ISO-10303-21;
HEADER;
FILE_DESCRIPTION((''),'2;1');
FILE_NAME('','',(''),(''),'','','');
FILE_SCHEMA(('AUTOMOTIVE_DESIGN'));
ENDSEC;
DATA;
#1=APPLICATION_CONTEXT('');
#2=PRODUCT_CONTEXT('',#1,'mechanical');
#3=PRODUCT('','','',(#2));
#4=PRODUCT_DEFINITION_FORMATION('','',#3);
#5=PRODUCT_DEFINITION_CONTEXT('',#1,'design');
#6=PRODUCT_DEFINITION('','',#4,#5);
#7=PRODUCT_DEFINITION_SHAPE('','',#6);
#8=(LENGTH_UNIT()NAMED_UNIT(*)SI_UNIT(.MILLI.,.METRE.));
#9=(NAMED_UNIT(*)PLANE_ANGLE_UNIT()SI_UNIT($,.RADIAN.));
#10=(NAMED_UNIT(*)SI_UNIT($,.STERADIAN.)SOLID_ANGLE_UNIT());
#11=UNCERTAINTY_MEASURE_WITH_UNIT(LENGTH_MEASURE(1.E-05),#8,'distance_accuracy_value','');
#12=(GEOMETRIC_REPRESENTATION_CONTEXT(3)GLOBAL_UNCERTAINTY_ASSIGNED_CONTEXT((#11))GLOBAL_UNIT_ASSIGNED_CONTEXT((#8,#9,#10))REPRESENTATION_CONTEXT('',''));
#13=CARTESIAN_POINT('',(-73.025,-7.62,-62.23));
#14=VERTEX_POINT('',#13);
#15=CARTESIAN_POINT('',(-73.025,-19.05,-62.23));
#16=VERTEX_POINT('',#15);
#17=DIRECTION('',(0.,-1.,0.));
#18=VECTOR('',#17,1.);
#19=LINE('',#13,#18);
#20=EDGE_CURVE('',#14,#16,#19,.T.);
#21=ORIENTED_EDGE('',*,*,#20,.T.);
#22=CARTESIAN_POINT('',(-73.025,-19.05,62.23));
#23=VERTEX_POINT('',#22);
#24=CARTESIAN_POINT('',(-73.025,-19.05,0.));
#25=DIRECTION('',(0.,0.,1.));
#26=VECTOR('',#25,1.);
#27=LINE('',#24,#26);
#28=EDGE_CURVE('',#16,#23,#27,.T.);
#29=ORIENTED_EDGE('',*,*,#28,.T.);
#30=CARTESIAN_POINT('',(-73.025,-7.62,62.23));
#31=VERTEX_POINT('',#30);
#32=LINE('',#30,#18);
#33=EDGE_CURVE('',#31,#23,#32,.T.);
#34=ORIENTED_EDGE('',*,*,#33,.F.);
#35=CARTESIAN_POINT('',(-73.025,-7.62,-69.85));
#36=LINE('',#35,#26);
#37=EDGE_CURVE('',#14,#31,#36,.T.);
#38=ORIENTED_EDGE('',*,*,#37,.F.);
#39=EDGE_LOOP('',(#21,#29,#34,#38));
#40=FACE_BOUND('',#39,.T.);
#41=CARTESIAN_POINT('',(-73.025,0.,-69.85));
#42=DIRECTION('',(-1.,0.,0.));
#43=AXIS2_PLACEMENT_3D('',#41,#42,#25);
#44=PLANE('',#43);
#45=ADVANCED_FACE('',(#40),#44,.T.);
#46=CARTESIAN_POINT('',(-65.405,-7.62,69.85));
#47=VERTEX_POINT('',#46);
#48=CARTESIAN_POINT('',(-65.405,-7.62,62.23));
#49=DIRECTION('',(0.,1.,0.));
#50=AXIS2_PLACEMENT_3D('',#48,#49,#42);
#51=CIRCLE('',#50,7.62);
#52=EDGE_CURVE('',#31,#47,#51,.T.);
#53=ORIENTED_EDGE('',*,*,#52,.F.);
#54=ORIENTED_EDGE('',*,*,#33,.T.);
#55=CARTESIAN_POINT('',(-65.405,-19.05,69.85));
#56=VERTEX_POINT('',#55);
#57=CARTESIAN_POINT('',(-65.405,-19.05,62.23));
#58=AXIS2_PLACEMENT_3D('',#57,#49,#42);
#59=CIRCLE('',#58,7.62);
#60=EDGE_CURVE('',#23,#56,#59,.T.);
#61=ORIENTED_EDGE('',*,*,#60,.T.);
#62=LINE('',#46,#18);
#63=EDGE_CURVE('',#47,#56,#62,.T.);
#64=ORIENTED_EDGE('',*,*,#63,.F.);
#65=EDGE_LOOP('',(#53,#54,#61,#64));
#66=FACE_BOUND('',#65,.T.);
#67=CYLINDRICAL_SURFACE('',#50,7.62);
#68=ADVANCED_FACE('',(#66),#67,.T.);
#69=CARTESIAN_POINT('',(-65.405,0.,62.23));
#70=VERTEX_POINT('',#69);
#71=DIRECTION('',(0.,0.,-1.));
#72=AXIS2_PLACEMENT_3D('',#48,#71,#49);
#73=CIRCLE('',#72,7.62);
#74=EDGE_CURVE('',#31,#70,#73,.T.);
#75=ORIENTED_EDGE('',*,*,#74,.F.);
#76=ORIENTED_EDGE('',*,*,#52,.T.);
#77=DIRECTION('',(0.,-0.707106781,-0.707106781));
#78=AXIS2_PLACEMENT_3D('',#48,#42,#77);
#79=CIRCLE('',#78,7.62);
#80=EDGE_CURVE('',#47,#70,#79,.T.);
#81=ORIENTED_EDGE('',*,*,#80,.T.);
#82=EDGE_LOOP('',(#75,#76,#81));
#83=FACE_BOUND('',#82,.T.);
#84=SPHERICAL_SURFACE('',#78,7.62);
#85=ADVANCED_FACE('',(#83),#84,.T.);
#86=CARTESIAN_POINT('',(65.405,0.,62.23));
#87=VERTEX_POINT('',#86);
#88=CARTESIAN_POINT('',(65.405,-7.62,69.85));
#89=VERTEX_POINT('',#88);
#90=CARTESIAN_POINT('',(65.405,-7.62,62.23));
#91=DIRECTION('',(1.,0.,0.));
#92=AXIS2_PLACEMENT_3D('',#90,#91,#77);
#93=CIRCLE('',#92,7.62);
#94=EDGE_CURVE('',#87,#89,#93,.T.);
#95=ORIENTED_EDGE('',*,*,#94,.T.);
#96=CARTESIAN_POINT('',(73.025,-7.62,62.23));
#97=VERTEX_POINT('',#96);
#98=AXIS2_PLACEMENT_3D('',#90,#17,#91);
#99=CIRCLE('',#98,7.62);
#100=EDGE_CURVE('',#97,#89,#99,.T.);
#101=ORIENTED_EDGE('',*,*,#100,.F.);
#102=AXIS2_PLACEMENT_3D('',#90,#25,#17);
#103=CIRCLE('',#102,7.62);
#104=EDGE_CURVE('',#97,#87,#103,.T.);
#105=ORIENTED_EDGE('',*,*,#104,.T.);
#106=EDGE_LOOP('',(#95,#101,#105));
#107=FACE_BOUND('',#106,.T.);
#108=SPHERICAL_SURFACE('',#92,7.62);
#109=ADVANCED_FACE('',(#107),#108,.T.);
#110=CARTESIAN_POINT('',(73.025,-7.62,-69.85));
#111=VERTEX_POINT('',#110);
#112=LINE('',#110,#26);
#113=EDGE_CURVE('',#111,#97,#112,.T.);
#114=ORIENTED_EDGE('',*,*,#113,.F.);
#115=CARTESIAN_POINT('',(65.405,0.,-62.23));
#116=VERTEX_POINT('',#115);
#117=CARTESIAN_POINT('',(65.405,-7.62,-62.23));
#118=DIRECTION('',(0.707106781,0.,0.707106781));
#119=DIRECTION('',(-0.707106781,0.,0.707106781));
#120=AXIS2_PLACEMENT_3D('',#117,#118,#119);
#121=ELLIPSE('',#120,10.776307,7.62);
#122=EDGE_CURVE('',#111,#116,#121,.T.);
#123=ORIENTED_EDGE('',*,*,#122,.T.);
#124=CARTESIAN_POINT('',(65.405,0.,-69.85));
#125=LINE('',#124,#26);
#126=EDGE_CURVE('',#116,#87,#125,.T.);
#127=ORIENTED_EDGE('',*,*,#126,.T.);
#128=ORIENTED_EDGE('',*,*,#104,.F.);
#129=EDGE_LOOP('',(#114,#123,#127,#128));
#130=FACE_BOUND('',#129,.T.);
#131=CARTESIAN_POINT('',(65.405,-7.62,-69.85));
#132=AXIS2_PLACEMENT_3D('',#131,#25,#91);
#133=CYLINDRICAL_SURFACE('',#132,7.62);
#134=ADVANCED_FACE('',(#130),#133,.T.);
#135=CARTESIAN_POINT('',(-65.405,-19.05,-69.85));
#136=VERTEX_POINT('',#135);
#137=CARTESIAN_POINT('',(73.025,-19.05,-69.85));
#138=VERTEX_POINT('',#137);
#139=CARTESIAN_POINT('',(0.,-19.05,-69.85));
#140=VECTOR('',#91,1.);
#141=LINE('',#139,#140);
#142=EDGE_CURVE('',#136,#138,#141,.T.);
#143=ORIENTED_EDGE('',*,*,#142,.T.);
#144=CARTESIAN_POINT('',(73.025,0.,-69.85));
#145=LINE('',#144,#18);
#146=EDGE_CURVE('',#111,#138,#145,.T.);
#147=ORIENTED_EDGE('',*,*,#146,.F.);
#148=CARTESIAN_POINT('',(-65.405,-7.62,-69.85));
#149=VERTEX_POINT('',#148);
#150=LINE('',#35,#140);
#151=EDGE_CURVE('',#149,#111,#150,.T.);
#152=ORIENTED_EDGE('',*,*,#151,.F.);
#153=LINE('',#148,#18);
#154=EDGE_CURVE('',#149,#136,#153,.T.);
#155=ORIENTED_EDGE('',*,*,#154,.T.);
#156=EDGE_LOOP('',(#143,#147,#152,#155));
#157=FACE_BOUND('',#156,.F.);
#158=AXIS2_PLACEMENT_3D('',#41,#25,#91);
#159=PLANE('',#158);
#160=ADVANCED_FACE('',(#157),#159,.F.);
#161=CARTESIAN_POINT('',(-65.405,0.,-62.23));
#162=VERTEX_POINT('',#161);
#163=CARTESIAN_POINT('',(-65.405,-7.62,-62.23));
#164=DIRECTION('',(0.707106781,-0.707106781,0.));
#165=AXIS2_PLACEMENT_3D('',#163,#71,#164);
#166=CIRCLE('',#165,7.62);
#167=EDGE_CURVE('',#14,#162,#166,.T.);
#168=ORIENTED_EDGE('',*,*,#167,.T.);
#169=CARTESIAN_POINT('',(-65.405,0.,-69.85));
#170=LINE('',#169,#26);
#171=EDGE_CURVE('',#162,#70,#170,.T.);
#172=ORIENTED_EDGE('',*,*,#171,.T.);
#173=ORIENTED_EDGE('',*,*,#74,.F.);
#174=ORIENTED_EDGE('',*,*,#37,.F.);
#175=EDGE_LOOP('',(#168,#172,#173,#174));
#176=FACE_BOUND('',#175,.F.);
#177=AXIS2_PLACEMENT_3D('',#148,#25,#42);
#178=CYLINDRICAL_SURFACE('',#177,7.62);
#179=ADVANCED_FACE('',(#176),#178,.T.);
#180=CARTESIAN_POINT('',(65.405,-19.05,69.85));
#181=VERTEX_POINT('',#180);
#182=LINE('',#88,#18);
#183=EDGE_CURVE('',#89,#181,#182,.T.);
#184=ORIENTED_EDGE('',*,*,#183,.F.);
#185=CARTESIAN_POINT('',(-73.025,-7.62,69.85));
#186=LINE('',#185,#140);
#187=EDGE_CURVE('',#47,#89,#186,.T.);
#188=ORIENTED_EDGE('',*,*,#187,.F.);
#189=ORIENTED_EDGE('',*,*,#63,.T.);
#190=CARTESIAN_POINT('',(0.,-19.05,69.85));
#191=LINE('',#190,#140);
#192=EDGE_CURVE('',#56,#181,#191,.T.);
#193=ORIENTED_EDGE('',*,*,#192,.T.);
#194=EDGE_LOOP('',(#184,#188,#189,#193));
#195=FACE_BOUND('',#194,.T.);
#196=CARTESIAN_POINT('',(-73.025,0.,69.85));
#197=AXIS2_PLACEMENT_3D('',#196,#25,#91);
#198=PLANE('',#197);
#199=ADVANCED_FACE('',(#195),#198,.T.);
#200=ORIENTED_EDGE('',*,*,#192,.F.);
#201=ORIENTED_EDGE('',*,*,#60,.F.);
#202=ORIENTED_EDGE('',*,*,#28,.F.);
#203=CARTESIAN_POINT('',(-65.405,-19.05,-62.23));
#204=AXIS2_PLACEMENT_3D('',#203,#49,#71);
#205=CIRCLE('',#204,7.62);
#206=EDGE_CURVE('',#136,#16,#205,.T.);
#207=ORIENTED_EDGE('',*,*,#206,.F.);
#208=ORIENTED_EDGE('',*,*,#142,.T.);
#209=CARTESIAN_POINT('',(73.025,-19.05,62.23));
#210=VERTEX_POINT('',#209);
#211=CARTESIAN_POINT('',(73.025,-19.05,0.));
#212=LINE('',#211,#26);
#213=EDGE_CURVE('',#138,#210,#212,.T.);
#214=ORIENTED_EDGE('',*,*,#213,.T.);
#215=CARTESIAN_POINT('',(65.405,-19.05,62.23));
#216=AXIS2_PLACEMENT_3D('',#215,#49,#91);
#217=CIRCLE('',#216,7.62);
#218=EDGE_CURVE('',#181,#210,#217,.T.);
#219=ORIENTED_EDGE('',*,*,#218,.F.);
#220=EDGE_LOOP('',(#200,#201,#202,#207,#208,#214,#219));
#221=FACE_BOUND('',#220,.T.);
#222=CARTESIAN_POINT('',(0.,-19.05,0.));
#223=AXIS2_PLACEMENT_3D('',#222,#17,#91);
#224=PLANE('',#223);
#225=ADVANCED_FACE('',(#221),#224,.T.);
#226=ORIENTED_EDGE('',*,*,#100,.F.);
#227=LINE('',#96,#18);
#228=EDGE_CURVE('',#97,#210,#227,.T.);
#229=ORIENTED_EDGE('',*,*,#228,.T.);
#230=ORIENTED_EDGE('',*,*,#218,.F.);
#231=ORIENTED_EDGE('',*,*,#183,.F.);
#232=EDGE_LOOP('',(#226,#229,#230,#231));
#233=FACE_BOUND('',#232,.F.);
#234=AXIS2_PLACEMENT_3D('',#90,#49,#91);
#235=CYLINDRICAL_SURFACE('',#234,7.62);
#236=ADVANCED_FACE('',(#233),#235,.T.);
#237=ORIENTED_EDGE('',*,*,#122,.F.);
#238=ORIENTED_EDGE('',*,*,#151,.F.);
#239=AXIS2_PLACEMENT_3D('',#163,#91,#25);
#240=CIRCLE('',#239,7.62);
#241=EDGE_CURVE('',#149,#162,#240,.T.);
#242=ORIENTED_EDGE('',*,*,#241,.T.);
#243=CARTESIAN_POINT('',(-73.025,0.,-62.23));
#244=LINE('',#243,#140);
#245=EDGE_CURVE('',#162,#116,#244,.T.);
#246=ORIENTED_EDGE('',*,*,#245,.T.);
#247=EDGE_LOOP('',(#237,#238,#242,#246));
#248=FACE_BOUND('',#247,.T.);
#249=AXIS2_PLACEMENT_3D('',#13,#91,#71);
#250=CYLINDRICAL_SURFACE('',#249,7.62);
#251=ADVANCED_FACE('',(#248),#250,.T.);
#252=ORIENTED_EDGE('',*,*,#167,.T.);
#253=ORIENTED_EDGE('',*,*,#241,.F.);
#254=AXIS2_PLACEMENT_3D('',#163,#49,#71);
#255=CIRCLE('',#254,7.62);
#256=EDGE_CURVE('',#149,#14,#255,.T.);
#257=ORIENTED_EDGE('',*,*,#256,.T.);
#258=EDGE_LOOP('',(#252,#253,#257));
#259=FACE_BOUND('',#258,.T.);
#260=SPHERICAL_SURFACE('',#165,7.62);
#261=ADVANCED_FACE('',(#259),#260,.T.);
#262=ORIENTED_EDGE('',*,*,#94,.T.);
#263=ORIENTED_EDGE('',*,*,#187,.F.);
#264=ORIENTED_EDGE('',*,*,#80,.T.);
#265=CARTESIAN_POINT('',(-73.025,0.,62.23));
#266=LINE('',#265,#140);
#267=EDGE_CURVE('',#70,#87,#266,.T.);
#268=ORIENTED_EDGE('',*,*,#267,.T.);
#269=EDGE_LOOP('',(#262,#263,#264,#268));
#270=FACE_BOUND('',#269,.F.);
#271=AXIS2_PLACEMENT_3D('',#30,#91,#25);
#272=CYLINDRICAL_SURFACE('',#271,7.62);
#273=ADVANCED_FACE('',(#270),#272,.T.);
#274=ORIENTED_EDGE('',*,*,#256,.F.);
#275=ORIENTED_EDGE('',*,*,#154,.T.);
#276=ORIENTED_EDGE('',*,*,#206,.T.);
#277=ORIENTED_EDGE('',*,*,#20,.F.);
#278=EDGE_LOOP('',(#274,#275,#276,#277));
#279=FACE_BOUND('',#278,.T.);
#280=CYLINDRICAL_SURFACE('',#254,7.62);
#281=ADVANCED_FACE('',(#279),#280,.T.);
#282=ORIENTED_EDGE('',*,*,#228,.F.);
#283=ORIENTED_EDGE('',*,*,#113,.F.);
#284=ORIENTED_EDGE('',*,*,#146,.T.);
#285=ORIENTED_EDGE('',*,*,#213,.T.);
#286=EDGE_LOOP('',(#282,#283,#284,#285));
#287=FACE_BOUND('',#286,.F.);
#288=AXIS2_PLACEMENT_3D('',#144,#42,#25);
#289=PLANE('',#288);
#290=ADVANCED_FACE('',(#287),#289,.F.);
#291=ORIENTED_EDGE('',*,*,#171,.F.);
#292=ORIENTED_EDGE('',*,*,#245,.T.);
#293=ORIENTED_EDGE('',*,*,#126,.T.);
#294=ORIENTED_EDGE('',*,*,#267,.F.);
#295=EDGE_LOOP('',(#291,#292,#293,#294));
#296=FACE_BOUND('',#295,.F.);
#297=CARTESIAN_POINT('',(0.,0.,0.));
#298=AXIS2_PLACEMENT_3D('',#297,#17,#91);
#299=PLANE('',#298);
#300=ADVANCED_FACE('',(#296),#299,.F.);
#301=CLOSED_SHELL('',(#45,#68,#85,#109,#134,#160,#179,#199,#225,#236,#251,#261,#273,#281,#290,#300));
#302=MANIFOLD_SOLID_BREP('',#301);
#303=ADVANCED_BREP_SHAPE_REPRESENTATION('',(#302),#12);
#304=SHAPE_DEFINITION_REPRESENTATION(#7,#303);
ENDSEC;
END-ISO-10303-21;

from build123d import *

# Parameters (mm, degrees)
F0_W         = 146.05
F0_H         = 139.7
F1_DEPTH     = 19.05
F2_R         = 7.62
F3_T1_DEPTH  = 30.48
F3_S5_W      = 7.62
F3_S5_H      = 7.62
F3_T6_DEPTH  = 7.62
F3_S11_W     = 7.62
F3_S11_H     = 7.62
F3_T12_DEPTH = 7.62
F4_T1_DEPTH  = 30.48
F4_S5_W      = 7.62
F4_S5_H      = 7.62
F4_T6_DEPTH  = 7.62


# Not quite as in the source:
# - a fillet or chamfer that OpenCascade refuses, or shapes differently, is made with other operations: its cross-section is extruded or revolved along the edge and cut away or added


with BuildPart() as f1:
    # F0 (on Front) → F1 (new body)
    with BuildSketch(Plane.XZ):
        Rectangle(F0_W, F0_H)
    extrude(amount=F1_DEPTH)

    # F2
    f2_edges = [f1.edges().sort_by_distance(p)[0] for p in [
        (73.025, 0, 0),
        (0, 0, 69.85),
        (-73.025, 0, 0),
        (0, 0, -69.85),
    ]]
    fillet(f2_edges, radius=F2_R)

    # F3: fillet of radius 7.62 on 2 edges, made by hand

    # F3_s2 → F3_t1 (cut)
    with BuildSketch(Plane.XZ.offset(7.62)):
        with BuildLine():
            ThreePointArc((-73.025, 62.23), (-70.7931536726, 67.6181536726), (-65.405, 69.85))
            Line((-65.405, 69.85), (-73.025, 69.85))
            Line((-73.025, 69.85), (-73.025, 62.23))
        make_face()
        with BuildLine():
            ThreePointArc((73.025, 62.23), (70.7931536726, 67.6181536726), (65.405, 69.85))
            Line((65.405, 69.85), (73.025, 69.85))
            Line((73.025, 69.85), (73.025, 62.23))
        make_face()
    extrude(amount=F3_T1_DEPTH, mode=Mode.SUBTRACT)


with BuildPart() as f3_tool4:
    # F3_s5 → F3_t6 (new body)
    with BuildSketch(Plane.YZ.offset(65.405)):
        with Locations((-3.81, 66.04)):
            Rectangle(F3_S5_W, F3_S5_H)
    extrude(amount=F3_T6_DEPTH)

    # F3_s7 → F3_t8 (revolve, cut)
    with BuildSketch(Plane(origin=(65.405, -7.62, 62.23), x_dir=(0, -0.7071067812, -0.7071067812), z_dir=(0, -0.7071067812, 0.7071067812))):
        with BuildLine():
            ThreePointArc((0, -7.62), (7.62, 0), (0, 7.62))
            Line((0, 7.62), (0, -7.62))
        make_face()
    revolve(axis=Axis((65.405, -7.62, 62.23), (1, 0, 0)), mode=Mode.SUBTRACT)


with BuildPart() as f1_1:
    add(f1.part)

    # F3_t3: cut F3_tool4
    add(f3_tool4.part, mode=Mode.SUBTRACT)


with BuildPart() as f3_tool10:
    # F3_s11 → F3_t12 (new body)
    with BuildSketch(Plane.YZ.offset(-65.405)):
        with Locations((-3.81, 66.04)):
            Rectangle(F3_S11_W, F3_S11_H)
    extrude(amount=-F3_T12_DEPTH)

    # F3_s13 → F3_t14 (revolve, cut)
    with BuildSketch(Plane(origin=(-65.405, -7.62, 62.23), x_dir=(0, -0.7071067812, -0.7071067812), z_dir=(0, 0.7071067812, -0.7071067812))):
        with BuildLine():
            ThreePointArc((0, -7.62), (7.62, 0), (0, 7.62))
            Line((0, 7.62), (0, -7.62))
        make_face()
    revolve(axis=Axis((-65.405, -7.62, 62.23), (-1, 0, 0)), mode=Mode.SUBTRACT)


with BuildPart() as f1_2:
    add(f1_1.part)

    # F3_t9: cut F3_tool10
    add(f3_tool10.part, mode=Mode.SUBTRACT)

    # F4: fillet of radius 7.62 on 1 edges, made by hand

    # F4_s2 → F4_t1 (cut)
    with BuildSketch(Plane.XZ.offset(7.62)):
        with BuildLine():
            ThreePointArc((-65.405, -69.85), (-70.7931536726, -67.6181536726), (-73.025, -62.23))
            Line((-73.025, -62.23), (-73.025, -69.85))
            Line((-73.025, -69.85), (-65.405, -69.85))
        make_face()
    extrude(amount=F4_T1_DEPTH, mode=Mode.SUBTRACT)


with BuildPart() as f4_tool4:
    # F4_s5 → F4_t6 (new body)
    with BuildSketch(Plane.XY.offset(-62.23)):
        with Locations((-69.215, -3.81)):
            Rectangle(F4_S5_W, F4_S5_H)
    extrude(amount=-F4_T6_DEPTH)

    # F4_s7 → F4_t8 (revolve, cut)
    with BuildSketch(Plane(origin=(-65.405, -7.62, -62.23), x_dir=(0.7071067812, -0.7071067812, 0), z_dir=(0.7071067812, 0.7071067812, 0))):
        with BuildLine():
            ThreePointArc((0, -7.62), (7.62, 0), (0, 7.62))
            Line((0, 7.62), (0, -7.62))
        make_face()
    revolve(axis=Axis((-65.405, -7.62, -62.23), (0, 0, -1)), mode=Mode.SUBTRACT)


with BuildPart() as f1_3:
    add(f1_2.part)

    # F4_t3: cut F4_tool4
    add(f4_tool4.part, mode=Mode.SUBTRACT)


solid = f1_3.part
